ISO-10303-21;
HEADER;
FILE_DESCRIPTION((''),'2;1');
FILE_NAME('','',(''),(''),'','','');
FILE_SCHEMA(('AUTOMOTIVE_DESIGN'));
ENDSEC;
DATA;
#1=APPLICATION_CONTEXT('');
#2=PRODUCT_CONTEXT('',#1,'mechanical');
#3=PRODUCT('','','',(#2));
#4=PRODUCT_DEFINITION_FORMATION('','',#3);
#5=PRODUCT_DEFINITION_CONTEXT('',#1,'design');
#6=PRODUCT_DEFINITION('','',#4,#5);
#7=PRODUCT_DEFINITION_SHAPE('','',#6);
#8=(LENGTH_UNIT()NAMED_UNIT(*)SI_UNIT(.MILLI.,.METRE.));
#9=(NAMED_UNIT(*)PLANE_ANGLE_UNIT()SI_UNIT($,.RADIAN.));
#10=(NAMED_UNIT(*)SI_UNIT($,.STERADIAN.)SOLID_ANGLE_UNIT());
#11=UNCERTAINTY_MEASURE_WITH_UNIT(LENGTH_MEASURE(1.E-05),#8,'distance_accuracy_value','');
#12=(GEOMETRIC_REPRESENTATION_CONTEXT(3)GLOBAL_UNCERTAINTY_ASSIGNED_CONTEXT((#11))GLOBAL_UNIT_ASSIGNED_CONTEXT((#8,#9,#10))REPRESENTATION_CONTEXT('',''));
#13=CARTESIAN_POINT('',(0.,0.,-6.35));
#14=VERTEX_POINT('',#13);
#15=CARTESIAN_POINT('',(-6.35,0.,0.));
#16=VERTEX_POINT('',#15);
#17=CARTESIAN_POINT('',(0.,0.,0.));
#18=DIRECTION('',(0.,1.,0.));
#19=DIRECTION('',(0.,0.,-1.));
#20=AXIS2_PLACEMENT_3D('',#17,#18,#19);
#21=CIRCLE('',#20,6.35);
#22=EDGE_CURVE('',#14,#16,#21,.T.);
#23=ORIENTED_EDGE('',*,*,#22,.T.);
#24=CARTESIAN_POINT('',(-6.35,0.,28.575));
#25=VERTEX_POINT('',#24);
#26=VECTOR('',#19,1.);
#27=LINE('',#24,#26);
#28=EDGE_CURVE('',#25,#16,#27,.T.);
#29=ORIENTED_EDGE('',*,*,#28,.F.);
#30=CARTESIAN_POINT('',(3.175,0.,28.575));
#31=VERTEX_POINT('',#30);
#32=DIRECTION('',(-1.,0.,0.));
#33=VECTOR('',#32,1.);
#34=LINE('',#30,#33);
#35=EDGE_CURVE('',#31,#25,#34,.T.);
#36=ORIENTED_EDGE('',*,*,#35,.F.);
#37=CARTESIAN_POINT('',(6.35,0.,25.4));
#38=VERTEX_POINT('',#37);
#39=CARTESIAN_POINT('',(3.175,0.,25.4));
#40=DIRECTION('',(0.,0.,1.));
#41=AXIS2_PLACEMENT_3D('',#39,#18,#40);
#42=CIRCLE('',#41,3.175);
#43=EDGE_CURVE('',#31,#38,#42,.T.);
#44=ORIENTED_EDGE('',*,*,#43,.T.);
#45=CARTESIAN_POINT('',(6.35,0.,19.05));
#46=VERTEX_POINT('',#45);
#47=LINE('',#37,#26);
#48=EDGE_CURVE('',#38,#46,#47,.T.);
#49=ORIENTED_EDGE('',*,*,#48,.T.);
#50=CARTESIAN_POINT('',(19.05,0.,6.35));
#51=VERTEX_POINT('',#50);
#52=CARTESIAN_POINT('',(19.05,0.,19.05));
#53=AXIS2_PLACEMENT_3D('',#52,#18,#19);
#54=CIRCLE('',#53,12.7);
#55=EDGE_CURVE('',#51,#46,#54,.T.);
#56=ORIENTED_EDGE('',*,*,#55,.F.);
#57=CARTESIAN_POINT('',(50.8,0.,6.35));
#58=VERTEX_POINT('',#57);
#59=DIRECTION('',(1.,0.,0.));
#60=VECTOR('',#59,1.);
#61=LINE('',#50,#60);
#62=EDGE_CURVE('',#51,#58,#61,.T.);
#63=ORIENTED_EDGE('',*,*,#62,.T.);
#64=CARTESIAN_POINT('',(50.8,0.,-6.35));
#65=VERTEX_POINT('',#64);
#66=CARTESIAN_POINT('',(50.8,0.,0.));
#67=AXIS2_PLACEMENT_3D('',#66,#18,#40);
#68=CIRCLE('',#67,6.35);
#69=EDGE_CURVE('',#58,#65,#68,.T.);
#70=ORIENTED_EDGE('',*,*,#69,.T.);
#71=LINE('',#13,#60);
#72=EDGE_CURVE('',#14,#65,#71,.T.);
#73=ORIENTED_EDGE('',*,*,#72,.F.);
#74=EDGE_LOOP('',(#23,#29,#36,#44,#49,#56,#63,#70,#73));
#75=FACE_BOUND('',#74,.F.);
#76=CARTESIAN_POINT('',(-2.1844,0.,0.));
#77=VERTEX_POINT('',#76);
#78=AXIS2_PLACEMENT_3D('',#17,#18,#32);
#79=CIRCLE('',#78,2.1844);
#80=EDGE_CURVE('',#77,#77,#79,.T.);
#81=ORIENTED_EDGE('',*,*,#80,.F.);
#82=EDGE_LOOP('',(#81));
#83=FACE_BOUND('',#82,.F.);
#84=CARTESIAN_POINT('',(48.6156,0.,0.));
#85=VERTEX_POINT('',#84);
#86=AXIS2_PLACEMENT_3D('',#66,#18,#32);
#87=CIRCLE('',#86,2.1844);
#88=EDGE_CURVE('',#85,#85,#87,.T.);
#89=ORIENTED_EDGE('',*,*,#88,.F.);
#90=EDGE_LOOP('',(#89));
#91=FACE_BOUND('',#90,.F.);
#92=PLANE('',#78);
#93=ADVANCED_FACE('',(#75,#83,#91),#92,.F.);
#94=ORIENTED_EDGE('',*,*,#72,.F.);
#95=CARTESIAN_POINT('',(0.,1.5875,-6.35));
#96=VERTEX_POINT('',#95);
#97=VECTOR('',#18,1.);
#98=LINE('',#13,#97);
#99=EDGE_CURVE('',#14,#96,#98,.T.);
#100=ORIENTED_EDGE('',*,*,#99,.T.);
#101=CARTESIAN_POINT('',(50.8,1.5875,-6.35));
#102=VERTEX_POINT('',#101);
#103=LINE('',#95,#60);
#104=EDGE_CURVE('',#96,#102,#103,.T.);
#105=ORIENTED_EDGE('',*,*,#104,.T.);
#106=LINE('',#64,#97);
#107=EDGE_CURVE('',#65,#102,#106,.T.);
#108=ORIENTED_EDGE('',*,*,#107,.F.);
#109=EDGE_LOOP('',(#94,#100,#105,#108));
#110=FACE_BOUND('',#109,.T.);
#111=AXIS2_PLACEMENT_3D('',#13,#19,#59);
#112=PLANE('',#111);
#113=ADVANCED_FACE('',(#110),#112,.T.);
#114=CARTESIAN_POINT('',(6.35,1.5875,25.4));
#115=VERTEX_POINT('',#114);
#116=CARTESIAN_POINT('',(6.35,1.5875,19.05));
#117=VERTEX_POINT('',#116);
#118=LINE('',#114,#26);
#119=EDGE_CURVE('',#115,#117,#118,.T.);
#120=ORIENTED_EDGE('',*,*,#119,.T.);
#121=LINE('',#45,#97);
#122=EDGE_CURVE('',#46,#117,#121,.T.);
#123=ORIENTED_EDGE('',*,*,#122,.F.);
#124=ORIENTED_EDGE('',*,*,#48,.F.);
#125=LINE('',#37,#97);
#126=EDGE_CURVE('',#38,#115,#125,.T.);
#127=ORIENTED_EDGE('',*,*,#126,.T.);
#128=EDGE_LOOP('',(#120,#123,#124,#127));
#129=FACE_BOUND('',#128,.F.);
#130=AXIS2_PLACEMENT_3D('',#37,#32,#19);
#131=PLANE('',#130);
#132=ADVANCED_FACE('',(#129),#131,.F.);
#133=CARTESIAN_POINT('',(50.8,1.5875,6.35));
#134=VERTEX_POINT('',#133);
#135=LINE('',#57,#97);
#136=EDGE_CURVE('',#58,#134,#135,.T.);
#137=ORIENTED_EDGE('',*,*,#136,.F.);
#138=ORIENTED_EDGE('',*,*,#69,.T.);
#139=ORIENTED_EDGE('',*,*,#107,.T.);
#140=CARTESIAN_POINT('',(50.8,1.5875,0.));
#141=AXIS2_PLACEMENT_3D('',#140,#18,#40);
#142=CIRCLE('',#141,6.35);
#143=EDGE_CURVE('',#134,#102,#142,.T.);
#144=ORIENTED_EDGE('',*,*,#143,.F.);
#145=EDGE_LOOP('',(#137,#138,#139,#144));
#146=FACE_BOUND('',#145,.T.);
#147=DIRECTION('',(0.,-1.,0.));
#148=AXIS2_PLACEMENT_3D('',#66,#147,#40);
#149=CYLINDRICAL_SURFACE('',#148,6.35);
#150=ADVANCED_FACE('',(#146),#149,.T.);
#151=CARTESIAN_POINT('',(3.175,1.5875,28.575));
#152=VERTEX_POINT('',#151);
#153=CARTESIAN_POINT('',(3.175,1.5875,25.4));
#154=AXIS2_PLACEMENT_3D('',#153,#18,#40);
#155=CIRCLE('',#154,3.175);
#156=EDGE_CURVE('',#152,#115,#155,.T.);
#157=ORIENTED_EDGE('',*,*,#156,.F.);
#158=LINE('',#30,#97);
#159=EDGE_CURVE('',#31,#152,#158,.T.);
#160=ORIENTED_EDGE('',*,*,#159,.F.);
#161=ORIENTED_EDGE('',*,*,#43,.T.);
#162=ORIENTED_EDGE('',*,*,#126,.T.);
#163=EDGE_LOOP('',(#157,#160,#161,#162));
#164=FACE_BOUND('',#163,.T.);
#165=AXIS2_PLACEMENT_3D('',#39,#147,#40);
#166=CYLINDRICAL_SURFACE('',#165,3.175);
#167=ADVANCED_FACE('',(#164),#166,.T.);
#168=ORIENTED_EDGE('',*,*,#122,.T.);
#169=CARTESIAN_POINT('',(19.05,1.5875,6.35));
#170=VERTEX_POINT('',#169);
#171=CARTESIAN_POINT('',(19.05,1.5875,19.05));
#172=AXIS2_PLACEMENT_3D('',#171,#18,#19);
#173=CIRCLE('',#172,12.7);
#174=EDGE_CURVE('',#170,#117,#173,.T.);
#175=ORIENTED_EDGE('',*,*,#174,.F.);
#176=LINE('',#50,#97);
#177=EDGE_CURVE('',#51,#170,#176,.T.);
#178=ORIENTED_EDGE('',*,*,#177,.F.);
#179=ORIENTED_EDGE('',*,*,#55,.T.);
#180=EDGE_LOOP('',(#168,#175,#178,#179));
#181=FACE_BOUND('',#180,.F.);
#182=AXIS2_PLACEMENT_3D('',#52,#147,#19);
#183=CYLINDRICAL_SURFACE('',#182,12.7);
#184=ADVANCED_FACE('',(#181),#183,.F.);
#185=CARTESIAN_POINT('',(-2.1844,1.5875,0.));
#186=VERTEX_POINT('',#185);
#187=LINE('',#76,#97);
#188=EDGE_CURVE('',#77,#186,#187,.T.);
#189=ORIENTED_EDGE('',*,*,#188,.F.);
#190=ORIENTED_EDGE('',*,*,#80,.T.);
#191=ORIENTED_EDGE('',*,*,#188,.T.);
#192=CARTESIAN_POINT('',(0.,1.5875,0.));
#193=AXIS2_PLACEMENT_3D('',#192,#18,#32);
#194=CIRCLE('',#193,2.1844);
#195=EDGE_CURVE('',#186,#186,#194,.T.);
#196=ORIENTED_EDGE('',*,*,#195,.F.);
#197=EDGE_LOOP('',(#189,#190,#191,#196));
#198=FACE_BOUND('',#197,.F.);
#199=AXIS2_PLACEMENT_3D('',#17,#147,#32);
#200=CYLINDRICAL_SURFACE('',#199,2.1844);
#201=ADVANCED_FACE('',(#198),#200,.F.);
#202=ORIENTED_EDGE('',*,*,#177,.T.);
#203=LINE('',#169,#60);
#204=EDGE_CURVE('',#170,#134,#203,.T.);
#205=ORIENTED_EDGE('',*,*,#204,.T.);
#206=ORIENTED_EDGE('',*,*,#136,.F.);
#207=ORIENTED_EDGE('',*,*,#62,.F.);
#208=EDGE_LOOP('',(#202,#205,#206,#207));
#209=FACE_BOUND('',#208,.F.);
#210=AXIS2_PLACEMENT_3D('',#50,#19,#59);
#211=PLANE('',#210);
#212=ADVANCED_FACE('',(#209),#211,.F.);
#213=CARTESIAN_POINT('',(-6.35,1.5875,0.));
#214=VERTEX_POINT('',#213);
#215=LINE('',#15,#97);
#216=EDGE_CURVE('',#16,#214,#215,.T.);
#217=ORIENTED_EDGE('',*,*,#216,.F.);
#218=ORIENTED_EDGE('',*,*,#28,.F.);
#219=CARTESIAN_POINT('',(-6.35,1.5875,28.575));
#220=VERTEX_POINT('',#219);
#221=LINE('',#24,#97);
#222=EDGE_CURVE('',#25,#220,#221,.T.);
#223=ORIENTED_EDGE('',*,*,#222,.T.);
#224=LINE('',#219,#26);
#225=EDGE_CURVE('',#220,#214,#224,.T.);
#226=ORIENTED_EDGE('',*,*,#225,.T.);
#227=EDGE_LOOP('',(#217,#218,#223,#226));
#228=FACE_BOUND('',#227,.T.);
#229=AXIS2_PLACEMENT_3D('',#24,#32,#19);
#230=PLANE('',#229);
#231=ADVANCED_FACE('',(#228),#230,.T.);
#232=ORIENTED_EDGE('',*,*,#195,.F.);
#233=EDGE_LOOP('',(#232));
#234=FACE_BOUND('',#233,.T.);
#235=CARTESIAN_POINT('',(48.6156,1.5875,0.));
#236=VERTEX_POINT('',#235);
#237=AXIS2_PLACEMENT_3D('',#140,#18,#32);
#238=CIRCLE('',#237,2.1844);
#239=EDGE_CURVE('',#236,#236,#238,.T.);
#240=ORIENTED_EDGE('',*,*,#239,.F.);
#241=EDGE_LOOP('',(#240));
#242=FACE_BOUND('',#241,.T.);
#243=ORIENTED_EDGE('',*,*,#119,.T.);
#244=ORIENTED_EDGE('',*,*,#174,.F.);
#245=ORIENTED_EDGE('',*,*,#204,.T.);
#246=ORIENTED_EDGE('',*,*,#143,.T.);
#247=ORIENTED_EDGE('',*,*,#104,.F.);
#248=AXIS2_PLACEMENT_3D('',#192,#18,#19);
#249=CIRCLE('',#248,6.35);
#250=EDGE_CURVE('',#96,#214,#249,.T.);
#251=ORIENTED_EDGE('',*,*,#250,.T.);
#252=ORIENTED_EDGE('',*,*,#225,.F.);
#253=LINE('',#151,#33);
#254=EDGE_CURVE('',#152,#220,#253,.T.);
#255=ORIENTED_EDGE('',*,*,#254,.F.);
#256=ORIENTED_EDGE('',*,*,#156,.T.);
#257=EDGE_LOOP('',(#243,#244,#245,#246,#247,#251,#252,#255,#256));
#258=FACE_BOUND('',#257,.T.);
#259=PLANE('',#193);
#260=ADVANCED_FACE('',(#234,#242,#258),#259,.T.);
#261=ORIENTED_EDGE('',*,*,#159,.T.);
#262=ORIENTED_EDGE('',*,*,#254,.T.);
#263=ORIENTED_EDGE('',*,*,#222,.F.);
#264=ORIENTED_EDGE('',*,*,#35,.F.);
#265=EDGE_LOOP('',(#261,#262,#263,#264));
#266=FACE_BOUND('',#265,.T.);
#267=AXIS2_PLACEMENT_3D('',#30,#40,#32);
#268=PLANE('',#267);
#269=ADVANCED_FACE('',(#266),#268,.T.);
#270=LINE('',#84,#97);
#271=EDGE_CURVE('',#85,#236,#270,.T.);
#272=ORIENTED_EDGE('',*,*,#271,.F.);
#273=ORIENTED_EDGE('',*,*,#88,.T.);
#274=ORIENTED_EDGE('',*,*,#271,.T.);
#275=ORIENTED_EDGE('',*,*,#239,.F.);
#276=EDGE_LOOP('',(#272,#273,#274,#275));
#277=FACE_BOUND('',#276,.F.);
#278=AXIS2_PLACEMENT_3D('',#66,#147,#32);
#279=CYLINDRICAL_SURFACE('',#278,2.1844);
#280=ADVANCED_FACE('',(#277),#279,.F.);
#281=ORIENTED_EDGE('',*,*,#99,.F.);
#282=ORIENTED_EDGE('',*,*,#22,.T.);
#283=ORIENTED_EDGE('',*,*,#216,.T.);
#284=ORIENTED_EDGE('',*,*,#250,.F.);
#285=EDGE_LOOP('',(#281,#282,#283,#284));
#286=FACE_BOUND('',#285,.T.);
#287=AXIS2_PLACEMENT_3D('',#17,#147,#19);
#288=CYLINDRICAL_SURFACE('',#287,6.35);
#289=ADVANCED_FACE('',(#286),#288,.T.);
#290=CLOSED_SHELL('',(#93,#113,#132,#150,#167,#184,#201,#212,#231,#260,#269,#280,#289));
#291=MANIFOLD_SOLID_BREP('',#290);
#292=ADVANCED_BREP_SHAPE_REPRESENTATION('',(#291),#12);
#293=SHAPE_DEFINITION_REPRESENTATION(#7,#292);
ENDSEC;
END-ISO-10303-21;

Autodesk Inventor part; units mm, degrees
ref_plane "YZ Plane" through (0, 0, 0) normal (1, 0, 0) x (0, 1, 0)
ref_plane "XZ Plane" through (0, 0, 0) normal (0, 1, 0) x (-1, 0, 0)
ref_plane "XY Plane" through (0, 0, 0) normal (0, 0, 1) x (1, 0, 0)
sketch "main" plane through (0, 0, 0) normal (0, 0, 1) x (1, 0, 0)
  circle A0 centre (13.5257, -15.1463) radius 2.1844
  circle A1 centre (-37.2743, -15.1463) radius 2.1844
  arc A2 (13.5257, -21.4963) -> (19.8757, -15.1463) centre (13.5257, -15.1463) ccw
  arc A3 (-37.2743, -8.7963) -> (-37.2743, -21.4963) centre (-37.2743, -15.1463) ccw
  line L0 (7.1757, 10.2537) -> (7.1757, 3.9037)
  line L1 (-5.5243, -8.7963) -> (-37.2743, -8.7963)
  arc A4 (-5.5243, -8.7963) -> (7.1757, 3.9037) centre (-5.5243, 3.9037) ccw
  line L2 (19.8757, 13.4287) -> (19.8757, -15.1463)
  line L3 (13.5257, -21.4963) -> (-37.2743, -21.4963)
  line L4 (10.3507, 13.4287) -> (19.8757, 13.4287)
  arc A5 (10.3507, 13.4287) -> (7.1757, 10.2537) centre (10.3507, 10.2537) ccw
  point P0 (6.3402, -4.1174)
  dimension "d0" = 12.7
  dimension "d1" = 12.7
  dimension "d2" = 12.7
  dimension "d5" = 50.8
  dimension "d7" = 34.925
  dimension "d8" = 3.175
sketch "Sketch1" plane through (0, 0, 0) normal (0, 1, 0) x (-1, 0, 0)
  circle A0 centre (0, 0) radius 2.1844
  circle A1 centre (-50.8, 0) radius 2.1844
  arc A2 (0, -6.35) -> (6.35, 0) centre (0, 0) ccw
  arc A3 (-50.8, 6.35) -> (-50.8, -6.35) centre (-50.8, 0) ccw
  line L0 (-6.35, 25.4) -> (-6.35, 19.05)
  line L1 (-19.05, 6.35) -> (-50.8, 6.35)
  arc A4 (-19.05, 6.35) -> (-6.35, 19.05) centre (-19.05, 19.05) ccw
  line L2 (6.35, 28.575) -> (6.35, 0)
  line L3 (0, -6.35) -> (-50.8, -6.35)
  line L4 (-3.175, 28.575) -> (6.35, 28.575)
  arc A5 (-3.175, 28.575) -> (-6.35, 25.4) centre (-3.175, 25.4) ccw
extrude "Extrusion1" add sketch "Sketch1" along normal blind 1.5875
properties part number "Magazine Gusset"
